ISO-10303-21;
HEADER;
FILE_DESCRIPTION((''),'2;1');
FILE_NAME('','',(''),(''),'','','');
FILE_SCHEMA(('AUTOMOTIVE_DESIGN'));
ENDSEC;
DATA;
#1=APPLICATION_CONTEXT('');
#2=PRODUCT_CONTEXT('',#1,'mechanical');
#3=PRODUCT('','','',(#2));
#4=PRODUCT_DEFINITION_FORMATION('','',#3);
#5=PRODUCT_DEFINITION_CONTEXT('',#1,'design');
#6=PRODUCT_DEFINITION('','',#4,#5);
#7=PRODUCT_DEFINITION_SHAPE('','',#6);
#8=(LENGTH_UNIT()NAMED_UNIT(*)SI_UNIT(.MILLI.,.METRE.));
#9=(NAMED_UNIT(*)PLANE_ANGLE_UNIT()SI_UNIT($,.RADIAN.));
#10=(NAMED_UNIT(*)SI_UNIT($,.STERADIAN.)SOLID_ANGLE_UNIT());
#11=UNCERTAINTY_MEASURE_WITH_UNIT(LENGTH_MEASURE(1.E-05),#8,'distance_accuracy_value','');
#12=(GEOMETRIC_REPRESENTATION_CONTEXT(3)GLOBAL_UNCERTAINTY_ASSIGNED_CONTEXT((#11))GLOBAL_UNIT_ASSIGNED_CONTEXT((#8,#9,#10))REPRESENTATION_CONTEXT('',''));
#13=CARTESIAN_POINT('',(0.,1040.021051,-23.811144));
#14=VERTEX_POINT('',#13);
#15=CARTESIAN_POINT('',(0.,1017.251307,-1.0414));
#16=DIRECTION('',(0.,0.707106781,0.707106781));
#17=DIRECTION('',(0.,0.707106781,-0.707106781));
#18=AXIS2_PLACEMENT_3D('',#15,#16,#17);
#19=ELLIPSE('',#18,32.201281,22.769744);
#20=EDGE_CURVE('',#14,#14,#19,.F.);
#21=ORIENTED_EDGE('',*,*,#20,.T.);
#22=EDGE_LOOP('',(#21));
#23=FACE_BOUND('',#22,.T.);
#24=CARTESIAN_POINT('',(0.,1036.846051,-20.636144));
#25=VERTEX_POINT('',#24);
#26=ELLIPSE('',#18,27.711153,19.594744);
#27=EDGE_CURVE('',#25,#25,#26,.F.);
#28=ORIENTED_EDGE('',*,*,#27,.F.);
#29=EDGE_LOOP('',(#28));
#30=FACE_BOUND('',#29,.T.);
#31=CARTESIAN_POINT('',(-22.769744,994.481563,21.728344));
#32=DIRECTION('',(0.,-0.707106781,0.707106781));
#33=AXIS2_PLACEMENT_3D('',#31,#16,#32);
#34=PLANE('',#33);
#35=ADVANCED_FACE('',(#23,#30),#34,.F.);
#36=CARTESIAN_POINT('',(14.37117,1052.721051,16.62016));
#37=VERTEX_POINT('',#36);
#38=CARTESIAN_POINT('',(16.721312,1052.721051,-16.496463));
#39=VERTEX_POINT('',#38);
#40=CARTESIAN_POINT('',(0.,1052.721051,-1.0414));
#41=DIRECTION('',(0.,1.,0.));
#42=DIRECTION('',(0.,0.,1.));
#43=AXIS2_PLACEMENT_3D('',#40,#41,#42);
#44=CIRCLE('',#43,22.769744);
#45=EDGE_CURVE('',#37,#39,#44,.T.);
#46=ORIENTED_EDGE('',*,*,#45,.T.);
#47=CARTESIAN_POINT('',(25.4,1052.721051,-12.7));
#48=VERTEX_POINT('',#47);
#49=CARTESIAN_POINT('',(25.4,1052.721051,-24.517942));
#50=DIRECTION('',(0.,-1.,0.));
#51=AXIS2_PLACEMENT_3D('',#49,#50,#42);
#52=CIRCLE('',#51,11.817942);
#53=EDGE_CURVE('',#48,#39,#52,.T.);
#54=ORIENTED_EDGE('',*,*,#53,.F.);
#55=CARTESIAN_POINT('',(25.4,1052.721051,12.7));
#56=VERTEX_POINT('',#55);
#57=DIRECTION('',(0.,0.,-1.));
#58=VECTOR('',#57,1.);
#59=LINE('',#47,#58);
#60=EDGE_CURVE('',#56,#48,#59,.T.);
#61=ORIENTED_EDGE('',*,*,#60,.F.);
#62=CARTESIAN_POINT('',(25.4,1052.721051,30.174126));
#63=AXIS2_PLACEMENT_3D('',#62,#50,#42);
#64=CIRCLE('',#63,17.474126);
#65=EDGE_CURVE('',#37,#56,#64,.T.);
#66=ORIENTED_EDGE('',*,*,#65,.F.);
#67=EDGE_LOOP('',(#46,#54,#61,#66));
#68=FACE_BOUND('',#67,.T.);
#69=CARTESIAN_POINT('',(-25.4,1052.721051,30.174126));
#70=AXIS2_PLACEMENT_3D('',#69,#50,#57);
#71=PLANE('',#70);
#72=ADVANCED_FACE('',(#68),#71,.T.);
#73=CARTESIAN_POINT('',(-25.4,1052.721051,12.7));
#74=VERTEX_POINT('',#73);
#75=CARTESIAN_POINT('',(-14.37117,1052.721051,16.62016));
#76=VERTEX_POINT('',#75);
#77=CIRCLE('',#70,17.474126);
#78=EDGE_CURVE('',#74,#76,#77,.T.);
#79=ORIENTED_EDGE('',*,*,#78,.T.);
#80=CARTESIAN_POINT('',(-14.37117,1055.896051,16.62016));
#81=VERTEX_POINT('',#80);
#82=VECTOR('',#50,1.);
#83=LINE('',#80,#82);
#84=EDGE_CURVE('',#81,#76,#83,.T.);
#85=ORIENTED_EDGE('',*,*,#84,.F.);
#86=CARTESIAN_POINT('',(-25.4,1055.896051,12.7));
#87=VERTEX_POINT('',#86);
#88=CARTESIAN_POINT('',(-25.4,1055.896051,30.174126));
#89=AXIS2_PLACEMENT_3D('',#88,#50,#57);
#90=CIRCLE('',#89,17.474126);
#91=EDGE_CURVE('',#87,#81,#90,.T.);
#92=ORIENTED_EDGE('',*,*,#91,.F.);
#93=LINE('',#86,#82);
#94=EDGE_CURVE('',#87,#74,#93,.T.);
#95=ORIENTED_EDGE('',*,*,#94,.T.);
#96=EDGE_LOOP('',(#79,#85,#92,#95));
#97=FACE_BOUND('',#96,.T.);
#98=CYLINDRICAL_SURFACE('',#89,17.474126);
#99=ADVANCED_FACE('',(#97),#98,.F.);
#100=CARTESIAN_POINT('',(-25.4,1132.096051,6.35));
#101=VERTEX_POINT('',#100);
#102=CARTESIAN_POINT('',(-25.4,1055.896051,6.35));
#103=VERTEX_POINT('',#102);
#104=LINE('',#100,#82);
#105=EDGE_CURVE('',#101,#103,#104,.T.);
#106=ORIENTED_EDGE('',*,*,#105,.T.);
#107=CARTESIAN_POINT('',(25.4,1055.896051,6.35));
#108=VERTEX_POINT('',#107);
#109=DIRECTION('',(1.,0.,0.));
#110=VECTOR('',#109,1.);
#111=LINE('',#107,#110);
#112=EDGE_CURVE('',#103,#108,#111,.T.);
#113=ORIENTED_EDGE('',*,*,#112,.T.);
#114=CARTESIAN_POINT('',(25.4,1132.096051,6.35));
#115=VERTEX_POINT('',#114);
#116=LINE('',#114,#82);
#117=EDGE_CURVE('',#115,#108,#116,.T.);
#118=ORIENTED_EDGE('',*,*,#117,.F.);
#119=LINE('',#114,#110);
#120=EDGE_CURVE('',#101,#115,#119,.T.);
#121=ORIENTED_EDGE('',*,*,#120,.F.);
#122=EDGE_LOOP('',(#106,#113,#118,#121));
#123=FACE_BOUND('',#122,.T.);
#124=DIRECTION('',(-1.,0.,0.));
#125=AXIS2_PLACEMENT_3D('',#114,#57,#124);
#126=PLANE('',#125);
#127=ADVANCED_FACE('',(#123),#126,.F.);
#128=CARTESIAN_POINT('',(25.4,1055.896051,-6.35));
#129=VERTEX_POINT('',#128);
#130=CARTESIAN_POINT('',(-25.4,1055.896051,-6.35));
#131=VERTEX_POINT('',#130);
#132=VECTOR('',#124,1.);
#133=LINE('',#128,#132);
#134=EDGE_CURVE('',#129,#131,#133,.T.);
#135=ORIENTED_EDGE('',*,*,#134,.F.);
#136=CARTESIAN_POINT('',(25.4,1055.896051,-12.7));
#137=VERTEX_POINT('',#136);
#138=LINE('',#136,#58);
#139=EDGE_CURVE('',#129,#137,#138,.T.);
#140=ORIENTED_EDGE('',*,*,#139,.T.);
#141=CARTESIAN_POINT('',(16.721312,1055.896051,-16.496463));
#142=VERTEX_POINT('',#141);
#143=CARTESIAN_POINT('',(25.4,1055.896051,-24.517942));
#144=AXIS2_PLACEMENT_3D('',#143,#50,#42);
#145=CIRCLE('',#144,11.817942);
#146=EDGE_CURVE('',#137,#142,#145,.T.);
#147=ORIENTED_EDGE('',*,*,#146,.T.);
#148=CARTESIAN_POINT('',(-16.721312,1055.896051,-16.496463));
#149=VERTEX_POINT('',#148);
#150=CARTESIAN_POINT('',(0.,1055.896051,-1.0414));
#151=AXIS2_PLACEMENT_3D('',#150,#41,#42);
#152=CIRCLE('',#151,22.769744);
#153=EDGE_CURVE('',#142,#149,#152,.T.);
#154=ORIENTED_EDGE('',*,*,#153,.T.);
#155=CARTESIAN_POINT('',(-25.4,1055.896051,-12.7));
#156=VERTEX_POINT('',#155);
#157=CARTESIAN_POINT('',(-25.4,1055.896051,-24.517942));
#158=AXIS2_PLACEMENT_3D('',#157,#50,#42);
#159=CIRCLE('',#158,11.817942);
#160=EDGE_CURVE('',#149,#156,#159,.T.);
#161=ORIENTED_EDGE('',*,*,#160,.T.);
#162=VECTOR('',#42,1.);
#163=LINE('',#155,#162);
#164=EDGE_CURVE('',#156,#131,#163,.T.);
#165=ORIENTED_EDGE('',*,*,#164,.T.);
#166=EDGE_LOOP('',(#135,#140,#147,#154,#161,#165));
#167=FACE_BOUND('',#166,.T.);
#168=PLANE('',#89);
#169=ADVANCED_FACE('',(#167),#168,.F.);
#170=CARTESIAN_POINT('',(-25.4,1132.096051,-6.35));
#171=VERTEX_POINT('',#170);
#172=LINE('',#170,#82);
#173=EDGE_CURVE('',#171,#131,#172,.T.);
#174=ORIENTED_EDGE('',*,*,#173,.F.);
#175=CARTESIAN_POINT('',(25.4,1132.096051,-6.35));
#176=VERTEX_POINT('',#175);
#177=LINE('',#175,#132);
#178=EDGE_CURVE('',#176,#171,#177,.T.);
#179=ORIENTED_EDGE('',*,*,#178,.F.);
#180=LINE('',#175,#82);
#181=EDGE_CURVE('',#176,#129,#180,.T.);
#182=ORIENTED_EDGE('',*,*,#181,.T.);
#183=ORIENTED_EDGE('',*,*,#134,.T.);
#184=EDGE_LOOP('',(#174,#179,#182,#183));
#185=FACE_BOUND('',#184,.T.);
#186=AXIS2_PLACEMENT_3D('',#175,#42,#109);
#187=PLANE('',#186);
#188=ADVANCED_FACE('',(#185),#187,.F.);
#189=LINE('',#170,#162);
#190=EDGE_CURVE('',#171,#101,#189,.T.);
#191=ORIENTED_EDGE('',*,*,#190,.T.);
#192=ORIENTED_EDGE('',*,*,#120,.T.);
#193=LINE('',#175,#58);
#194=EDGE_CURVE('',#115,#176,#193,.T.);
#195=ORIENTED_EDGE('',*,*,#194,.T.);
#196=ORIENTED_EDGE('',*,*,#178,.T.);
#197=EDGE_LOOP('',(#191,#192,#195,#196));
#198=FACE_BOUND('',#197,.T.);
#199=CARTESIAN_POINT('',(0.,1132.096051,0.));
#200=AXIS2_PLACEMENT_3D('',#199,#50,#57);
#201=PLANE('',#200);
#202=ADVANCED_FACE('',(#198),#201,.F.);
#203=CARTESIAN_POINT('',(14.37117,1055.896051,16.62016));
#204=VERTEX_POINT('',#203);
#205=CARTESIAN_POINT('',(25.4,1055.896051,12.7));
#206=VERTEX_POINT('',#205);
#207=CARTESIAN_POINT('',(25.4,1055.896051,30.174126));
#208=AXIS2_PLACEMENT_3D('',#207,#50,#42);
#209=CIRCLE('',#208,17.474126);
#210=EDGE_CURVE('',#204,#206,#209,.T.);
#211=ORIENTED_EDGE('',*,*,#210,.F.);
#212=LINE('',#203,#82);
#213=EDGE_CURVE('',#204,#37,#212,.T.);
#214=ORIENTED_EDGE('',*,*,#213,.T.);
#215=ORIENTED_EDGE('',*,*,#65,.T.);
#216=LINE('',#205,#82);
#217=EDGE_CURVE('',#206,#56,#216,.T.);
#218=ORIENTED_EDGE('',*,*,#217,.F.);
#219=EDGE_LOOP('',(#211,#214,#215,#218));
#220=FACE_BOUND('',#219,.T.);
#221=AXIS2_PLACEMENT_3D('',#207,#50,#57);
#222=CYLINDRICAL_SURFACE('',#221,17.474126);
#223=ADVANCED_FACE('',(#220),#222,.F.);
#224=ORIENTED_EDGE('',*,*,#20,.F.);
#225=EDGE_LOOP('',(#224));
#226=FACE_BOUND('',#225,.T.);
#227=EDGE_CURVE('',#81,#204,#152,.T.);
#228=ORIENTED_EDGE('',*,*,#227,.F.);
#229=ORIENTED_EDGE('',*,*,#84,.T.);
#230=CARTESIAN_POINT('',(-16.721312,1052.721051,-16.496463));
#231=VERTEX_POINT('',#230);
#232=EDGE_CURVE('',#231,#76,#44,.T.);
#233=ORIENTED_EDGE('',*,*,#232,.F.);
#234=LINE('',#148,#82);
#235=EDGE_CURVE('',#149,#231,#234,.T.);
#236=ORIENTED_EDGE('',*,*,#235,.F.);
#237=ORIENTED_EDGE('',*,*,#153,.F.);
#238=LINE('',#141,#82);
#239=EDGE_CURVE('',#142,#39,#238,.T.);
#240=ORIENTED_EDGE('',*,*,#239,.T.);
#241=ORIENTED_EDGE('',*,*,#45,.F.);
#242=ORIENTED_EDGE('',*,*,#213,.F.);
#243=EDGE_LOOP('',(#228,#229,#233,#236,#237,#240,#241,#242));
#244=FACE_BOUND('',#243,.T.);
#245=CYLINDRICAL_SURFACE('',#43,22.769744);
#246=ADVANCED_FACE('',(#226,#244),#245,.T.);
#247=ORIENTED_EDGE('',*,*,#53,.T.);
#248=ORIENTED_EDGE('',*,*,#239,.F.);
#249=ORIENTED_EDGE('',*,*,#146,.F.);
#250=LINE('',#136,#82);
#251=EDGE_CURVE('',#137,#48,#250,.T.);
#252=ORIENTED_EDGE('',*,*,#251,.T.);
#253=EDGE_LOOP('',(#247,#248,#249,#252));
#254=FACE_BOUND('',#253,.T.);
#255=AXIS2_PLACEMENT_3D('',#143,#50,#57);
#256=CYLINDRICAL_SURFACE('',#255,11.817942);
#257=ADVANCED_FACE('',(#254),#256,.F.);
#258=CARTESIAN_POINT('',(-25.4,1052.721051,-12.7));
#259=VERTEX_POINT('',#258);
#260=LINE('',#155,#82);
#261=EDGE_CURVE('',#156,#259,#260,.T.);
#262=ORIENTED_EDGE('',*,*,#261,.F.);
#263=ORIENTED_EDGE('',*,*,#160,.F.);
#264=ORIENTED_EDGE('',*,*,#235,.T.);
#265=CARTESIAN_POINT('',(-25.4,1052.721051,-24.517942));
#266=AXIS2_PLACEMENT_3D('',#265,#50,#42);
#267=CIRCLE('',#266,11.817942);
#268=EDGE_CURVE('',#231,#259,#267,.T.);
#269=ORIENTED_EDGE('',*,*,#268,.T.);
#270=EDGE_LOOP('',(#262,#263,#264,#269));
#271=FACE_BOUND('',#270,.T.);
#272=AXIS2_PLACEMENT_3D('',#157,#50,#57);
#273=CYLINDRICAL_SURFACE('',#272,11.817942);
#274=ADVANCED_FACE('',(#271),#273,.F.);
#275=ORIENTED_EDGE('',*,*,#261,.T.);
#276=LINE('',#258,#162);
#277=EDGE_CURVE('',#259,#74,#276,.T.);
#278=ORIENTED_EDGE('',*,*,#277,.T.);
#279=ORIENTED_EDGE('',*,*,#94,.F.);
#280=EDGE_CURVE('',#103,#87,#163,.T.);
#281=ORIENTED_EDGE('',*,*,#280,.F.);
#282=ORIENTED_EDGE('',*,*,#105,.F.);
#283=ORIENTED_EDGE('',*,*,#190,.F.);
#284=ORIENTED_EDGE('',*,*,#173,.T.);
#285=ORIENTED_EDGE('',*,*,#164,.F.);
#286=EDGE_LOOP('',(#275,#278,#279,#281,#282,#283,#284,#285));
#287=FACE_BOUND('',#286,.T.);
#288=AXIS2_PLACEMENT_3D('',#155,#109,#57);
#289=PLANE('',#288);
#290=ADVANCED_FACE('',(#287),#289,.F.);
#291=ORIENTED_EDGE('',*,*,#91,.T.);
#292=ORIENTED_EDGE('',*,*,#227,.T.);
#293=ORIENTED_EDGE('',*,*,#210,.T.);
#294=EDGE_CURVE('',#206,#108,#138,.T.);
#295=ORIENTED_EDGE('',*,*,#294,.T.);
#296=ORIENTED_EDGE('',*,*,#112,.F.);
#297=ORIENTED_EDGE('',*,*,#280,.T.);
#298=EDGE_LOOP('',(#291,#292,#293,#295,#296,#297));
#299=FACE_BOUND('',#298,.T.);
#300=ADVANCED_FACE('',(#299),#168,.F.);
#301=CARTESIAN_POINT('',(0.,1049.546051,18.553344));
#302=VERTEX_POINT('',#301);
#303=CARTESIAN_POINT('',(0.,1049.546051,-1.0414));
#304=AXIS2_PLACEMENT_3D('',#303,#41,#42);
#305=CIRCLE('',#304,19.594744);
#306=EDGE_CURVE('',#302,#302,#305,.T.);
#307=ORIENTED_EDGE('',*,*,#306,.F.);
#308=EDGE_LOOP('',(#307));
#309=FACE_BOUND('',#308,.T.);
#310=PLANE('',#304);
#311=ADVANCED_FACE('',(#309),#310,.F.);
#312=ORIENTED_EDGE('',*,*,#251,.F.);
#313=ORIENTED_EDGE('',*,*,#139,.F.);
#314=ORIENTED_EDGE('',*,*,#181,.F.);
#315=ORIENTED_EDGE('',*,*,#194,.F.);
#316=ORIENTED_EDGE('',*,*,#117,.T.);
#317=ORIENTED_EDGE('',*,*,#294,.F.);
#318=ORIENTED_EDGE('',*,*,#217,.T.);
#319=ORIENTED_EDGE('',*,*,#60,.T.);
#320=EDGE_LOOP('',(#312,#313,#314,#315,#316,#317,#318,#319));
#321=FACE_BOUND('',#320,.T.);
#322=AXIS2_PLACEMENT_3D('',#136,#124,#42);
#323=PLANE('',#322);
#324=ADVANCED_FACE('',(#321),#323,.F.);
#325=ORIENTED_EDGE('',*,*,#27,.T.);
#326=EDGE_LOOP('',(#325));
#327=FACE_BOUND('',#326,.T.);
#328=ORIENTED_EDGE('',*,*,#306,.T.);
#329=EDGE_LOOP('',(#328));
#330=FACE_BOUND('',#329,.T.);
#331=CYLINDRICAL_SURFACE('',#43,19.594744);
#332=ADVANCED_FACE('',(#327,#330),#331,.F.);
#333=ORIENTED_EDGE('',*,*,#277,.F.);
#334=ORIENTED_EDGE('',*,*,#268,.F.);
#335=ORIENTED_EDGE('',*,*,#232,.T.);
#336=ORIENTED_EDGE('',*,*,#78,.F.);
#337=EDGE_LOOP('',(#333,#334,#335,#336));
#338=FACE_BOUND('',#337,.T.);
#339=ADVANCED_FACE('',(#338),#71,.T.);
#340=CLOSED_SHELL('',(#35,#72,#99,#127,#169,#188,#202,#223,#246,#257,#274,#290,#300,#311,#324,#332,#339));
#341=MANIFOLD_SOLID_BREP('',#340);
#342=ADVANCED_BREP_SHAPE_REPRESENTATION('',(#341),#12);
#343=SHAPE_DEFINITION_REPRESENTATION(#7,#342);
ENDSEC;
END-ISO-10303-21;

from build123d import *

# Parameters (mm, degrees)
CUT_EXTRUDE1_DEPTH      = 1054.2364613417774
CUT_EXTRUDE1_DEPTH_BACK = 1054.2364613417774
SHELL1_OUTLINE_W        = 19.594743879
SHELL1_OUTLINE_H        = 51.88948775799986
BOSS_EXTRUDE1_DEPTH     = 3.175
SKETCH5_W               = 50.79999999999999
SKETCH5_H               = 12.699999999999998
BOSS_EXTRUDE2_DEPTH     = 76.2


# Read off the part's stored shape, not the designer's step: Shell1
with BuildPart() as part:
    # Sketch2 → Revolve1 (revolve)
    with BuildSketch(Plane(origin=(0, 0, 0), x_dir=(0, 0, -1), z_dir=(1, 0, 0))):
        Polygon((1.0414000000000794, 1052.7210512242139), (-21.7283438789312, 1052.7210512242139), (-21.7283438789312, 994.4815634663521), (1.0414000000000847, 994.4815634663521), align=None)
    revolve(axis=Axis((0, 1052.7210512242139, -1.0414000000000794), (0, -1, -9e-17)))

    # Sketch3 → Cut-Extrude1 (cut, two sides: drawn at the far end of the back side and taken through both)
    with BuildSketch(Plane(origin=(0, 0, 0), x_dir=(0, 0, -1), z_dir=(1, 0, 0)).offset(-CUT_EXTRUDE1_DEPTH_BACK)):
        Polygon((-21.7283438789312, 994.4815634663521), (23.811143878931354, 1040.0210512242138), (23.811143878931365, 994.4815634663521), align=None)
    extrude(amount=CUT_EXTRUDE1_DEPTH + CUT_EXTRUDE1_DEPTH_BACK, mode=Mode.SUBTRACT)

    # Shell1 outline → Shell1 (revolve, cut)
    with BuildSketch(Plane.XY.offset(-1.0414)):
        with Locations((9.7973719395, 1023.601307345)):
            Rectangle(SHELL1_OUTLINE_W, SHELL1_OUTLINE_H)
    revolve(axis=Axis((0, 0, -1.0414), (0, 1, 0)), mode=Mode.SUBTRACT)

    # Sketch4 → Boss-Extrude1 (add)
    with BuildSketch(Plane(origin=(0, 1052.7210512242139, 9.407e-14), x_dir=(1, 0, 0), z_dir=(0, 1, 0))):
        with BuildLine():
            Line((25.4, 12.700000000000092), (25.4, -12.699999999999907))
            ThreePointArc((25.4, -12.699999999999907), (19.547591344304465, -13.709181649641387), (14.371169963720073, -16.62016024211882))
            ThreePointArc((14.371169963720073, -16.62016024211882), (-8.72e-15, -21.72834387893111), (-14.371169963720085, -16.620160242118818))
            ThreePointArc((-14.371169963720085, -16.620160242118818), (-19.54759134430447, -13.709181649641383), (-25.4, -12.699999999999907))
            Line((-25.4, -12.699999999999907), (-25.4, 12.700000000000092))
            ThreePointArc((-25.4, 12.700000000000092), (-20.663631299775105, 13.690635523953107), (-16.72131200571086, 16.496462637200914))
            ThreePointArc((-16.72131200571086, 16.496462637200914), (1.39e-15, 23.811143878931446), (16.72131200571086, 16.496462637200906))
            ThreePointArc((16.72131200571086, 16.496462637200906), (20.663631299775105, 13.690635523953098), (25.4, 12.700000000000092))
        make_face()
    extrude(amount=BOSS_EXTRUDE1_DEPTH)

    # Sketch5 → Boss-Extrude2 (add)
    with BuildSketch(Plane(origin=(0, 1055.8960512242138, 0), x_dir=(1, 0, 0), z_dir=(0, 1, 0))):
        Rectangle(SKETCH5_W, SKETCH5_H)
    extrude(amount=BOSS_EXTRUDE2_DEPTH)


solid = part.part
